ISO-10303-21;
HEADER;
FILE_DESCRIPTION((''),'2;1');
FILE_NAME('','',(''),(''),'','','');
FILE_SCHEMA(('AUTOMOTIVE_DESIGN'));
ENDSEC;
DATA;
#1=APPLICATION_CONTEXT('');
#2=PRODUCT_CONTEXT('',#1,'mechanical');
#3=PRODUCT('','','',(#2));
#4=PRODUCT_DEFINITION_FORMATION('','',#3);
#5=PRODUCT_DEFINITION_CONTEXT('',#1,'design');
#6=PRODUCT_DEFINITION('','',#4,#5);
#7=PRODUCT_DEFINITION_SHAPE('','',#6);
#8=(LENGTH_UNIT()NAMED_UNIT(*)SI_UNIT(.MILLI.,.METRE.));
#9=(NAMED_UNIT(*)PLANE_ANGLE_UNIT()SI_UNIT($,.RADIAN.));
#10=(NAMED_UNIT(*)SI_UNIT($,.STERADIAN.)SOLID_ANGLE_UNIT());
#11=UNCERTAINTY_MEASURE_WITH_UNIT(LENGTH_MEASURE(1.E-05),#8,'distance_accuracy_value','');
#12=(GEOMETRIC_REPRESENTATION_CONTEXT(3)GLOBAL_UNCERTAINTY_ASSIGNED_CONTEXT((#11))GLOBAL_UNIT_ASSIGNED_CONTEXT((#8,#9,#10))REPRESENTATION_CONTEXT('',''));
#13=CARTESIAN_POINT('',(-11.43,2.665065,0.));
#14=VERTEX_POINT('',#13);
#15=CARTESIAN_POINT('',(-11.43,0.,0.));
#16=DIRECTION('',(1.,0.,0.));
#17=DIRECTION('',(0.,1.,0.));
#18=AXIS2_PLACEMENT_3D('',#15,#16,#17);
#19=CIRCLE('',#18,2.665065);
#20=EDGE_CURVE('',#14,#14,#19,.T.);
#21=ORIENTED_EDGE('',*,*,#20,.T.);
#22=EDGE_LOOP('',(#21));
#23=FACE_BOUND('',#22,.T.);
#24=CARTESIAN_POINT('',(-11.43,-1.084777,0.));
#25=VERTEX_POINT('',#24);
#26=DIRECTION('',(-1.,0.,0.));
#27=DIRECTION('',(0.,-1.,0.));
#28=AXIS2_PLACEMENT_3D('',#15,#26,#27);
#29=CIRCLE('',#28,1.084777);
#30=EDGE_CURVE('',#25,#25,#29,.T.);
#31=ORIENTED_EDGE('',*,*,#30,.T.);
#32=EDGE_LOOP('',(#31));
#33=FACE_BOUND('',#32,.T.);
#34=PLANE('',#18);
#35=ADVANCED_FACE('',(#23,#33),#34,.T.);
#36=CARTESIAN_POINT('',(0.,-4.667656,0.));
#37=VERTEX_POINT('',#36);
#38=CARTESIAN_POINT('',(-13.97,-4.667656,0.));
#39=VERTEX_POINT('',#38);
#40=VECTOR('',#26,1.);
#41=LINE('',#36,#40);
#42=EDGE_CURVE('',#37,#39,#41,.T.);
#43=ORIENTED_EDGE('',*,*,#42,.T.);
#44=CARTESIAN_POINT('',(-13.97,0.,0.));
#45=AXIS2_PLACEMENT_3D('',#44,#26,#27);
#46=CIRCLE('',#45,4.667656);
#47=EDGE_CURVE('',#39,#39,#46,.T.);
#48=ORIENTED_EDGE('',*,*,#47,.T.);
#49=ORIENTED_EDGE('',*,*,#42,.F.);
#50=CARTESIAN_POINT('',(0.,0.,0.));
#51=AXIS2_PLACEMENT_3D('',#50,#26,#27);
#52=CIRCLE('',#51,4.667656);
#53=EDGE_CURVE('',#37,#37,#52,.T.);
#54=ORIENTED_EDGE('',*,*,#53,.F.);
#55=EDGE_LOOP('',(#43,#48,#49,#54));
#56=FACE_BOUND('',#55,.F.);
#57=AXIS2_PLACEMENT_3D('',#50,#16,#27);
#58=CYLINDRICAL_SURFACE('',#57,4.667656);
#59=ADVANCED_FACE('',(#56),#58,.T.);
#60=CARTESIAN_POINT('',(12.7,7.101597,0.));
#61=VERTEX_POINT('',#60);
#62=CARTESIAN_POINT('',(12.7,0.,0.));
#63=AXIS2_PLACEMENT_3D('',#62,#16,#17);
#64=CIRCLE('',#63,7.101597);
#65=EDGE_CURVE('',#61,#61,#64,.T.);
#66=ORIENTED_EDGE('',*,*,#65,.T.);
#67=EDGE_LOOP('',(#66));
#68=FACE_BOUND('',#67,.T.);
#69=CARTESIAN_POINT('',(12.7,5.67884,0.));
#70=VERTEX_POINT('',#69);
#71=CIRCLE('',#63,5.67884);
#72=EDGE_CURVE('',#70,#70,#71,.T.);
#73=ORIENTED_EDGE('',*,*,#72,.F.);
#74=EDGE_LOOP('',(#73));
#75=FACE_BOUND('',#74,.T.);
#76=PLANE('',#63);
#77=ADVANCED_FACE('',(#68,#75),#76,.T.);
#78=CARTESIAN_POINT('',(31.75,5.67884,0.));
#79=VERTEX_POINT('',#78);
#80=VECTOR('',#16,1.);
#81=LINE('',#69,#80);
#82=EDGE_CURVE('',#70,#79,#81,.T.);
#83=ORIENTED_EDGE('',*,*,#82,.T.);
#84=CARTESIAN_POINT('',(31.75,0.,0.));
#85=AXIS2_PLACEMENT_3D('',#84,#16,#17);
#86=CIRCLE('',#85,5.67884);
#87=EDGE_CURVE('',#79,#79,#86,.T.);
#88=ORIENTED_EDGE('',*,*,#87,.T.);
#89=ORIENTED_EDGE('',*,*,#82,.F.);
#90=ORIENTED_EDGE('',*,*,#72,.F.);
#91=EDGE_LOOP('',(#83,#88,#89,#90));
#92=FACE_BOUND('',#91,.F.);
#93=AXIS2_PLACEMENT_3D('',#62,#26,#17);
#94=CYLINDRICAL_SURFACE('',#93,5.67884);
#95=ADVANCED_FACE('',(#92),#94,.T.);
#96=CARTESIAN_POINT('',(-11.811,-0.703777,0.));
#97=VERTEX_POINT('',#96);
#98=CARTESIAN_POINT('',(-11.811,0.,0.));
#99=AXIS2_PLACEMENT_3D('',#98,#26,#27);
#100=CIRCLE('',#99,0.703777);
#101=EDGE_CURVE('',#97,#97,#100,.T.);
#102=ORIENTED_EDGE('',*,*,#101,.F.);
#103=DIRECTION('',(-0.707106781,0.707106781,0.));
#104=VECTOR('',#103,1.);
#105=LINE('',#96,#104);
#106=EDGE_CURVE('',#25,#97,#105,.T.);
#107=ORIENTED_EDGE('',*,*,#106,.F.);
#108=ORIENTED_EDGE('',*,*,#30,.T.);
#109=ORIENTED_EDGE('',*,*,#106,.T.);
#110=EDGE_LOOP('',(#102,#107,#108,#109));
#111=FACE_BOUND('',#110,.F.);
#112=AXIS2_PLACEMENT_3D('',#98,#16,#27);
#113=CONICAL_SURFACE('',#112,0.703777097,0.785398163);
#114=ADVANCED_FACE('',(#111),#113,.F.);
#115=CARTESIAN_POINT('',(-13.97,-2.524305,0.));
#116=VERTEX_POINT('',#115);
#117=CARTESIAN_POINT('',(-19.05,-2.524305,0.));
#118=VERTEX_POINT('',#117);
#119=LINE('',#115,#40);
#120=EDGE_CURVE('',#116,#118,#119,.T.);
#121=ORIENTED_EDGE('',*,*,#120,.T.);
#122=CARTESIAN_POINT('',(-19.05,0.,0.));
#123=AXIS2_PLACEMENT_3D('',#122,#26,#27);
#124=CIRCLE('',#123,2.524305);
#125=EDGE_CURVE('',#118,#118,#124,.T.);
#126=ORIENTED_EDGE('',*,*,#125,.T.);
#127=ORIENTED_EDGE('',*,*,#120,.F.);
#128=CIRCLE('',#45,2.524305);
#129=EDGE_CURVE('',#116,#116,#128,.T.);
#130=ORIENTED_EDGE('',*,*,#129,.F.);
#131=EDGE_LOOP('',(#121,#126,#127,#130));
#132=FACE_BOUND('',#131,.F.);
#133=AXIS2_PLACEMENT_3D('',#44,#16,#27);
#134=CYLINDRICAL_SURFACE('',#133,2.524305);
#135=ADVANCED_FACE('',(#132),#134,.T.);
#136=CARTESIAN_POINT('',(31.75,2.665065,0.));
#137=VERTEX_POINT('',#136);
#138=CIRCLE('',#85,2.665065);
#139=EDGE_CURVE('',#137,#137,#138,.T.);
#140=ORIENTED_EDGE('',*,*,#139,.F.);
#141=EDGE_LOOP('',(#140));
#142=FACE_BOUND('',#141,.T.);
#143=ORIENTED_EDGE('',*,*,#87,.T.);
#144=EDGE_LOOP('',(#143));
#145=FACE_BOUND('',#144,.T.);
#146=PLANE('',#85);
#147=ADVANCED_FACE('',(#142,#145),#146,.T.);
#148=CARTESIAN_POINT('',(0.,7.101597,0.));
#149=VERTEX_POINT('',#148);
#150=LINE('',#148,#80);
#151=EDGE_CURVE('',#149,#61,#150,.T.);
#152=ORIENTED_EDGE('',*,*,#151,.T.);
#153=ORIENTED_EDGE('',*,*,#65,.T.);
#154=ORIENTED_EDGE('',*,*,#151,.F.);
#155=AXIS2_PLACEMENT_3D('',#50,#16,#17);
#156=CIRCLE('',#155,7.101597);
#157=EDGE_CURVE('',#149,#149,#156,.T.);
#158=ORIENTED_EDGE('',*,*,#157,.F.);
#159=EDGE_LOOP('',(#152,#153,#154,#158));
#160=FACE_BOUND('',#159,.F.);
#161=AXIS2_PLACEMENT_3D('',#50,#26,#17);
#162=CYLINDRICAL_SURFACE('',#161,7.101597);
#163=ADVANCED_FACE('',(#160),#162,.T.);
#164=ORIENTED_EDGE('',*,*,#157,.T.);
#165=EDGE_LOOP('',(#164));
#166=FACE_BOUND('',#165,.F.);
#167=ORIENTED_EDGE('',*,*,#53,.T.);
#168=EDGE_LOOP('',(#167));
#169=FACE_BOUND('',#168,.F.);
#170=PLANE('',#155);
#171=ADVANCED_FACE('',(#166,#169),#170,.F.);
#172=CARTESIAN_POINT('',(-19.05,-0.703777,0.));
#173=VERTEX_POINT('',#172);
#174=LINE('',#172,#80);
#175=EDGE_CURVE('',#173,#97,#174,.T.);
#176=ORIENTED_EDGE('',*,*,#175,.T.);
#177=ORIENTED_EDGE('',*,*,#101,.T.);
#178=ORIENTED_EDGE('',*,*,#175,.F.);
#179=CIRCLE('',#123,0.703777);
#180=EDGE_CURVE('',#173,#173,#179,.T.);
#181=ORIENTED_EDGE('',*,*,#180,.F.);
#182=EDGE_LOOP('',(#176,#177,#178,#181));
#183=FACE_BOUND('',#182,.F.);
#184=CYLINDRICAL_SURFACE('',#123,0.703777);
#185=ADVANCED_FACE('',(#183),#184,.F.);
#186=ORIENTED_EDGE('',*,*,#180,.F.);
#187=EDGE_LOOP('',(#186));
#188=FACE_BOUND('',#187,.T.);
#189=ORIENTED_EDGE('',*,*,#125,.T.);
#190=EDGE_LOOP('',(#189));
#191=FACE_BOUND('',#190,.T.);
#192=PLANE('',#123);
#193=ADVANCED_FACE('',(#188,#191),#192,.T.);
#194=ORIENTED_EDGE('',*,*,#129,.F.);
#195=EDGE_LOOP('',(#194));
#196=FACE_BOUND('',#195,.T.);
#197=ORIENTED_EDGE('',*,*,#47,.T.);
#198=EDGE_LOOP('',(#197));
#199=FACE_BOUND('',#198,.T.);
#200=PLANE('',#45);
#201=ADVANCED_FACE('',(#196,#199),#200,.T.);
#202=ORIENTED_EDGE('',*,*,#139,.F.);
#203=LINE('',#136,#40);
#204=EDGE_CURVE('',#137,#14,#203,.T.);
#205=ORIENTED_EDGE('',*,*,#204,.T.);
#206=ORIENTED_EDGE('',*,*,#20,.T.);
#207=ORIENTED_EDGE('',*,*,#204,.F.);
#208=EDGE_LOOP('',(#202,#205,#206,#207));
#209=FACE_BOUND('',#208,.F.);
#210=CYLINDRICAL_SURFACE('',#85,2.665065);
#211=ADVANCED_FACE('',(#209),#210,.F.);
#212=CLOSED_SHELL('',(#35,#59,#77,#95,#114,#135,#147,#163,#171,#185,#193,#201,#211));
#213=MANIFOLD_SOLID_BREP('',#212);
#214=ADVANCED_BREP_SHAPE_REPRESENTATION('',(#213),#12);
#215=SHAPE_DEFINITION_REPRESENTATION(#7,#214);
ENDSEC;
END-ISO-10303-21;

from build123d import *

# Parameters (mm, degrees)
F0_R      = 7.1015967563
F1_DEPTH  = 12.7
F2_R      = 5.6788395521
F3_DEPTH  = 19.05
F4_R      = 4.6676560737
F5_DEPTH  = 13.97
F6_R      = 2.5243045871
F7_DEPTH  = 5.08
F8_R      = 2.6650653171
F9_DEPTH  = 43.18
F10_R     = 0.7037770969
F11_DEPTH = 25.4
F12_SIZE  = 0.381


# Not quite as in the source:
# - the program builds the solid bodies; features that only make, move or delete a surface that nothing else refers to are left out


with BuildPart() as f1:
    # F0 (on Right) → F1 (new body)
    with BuildSketch(Plane.YZ):
        Circle(F0_R)
    extrude(amount=F1_DEPTH)

    # F2 (on face) → F3 (join)
    with BuildSketch(Plane.YZ.offset(12.7)):
        Circle(F2_R)
    extrude(amount=F3_DEPTH)

    # F4 (on face) → F5 (join)
    with BuildSketch(Plane(origin=(0, 0, 0), x_dir=(0, -1, 0), z_dir=(-1, 0, 0))):
        Circle(F4_R)
    extrude(amount=F5_DEPTH)

    # F6 (on face) → F7 (join)
    with BuildSketch(Plane(origin=(-13.97, 0, 0), x_dir=(0, -1, 0), z_dir=(-1, 0, 0))):
        Circle(F6_R)
    extrude(amount=F7_DEPTH)

    # F8 (on face) → F9 (cut)
    with BuildSketch(Plane.YZ.offset(31.75)):
        Circle(F8_R)
    extrude(amount=-F9_DEPTH, mode=Mode.SUBTRACT)

    # F10 (on face) → F11 (cut)
    with BuildSketch(Plane(origin=(-19.05, 0, 0), x_dir=(0, -1, 0), z_dir=(-1, 0, 0))):
        Circle(F10_R)
    extrude(amount=-F11_DEPTH, mode=Mode.SUBTRACT)

    # F12
    f12_edges = [f1.edges().sort_by_distance(p)[0] for p in [
        (-11.43, 0.703777, 0),
    ]]
    chamfer(f12_edges, length=F12_SIZE)


solid = f1.part
